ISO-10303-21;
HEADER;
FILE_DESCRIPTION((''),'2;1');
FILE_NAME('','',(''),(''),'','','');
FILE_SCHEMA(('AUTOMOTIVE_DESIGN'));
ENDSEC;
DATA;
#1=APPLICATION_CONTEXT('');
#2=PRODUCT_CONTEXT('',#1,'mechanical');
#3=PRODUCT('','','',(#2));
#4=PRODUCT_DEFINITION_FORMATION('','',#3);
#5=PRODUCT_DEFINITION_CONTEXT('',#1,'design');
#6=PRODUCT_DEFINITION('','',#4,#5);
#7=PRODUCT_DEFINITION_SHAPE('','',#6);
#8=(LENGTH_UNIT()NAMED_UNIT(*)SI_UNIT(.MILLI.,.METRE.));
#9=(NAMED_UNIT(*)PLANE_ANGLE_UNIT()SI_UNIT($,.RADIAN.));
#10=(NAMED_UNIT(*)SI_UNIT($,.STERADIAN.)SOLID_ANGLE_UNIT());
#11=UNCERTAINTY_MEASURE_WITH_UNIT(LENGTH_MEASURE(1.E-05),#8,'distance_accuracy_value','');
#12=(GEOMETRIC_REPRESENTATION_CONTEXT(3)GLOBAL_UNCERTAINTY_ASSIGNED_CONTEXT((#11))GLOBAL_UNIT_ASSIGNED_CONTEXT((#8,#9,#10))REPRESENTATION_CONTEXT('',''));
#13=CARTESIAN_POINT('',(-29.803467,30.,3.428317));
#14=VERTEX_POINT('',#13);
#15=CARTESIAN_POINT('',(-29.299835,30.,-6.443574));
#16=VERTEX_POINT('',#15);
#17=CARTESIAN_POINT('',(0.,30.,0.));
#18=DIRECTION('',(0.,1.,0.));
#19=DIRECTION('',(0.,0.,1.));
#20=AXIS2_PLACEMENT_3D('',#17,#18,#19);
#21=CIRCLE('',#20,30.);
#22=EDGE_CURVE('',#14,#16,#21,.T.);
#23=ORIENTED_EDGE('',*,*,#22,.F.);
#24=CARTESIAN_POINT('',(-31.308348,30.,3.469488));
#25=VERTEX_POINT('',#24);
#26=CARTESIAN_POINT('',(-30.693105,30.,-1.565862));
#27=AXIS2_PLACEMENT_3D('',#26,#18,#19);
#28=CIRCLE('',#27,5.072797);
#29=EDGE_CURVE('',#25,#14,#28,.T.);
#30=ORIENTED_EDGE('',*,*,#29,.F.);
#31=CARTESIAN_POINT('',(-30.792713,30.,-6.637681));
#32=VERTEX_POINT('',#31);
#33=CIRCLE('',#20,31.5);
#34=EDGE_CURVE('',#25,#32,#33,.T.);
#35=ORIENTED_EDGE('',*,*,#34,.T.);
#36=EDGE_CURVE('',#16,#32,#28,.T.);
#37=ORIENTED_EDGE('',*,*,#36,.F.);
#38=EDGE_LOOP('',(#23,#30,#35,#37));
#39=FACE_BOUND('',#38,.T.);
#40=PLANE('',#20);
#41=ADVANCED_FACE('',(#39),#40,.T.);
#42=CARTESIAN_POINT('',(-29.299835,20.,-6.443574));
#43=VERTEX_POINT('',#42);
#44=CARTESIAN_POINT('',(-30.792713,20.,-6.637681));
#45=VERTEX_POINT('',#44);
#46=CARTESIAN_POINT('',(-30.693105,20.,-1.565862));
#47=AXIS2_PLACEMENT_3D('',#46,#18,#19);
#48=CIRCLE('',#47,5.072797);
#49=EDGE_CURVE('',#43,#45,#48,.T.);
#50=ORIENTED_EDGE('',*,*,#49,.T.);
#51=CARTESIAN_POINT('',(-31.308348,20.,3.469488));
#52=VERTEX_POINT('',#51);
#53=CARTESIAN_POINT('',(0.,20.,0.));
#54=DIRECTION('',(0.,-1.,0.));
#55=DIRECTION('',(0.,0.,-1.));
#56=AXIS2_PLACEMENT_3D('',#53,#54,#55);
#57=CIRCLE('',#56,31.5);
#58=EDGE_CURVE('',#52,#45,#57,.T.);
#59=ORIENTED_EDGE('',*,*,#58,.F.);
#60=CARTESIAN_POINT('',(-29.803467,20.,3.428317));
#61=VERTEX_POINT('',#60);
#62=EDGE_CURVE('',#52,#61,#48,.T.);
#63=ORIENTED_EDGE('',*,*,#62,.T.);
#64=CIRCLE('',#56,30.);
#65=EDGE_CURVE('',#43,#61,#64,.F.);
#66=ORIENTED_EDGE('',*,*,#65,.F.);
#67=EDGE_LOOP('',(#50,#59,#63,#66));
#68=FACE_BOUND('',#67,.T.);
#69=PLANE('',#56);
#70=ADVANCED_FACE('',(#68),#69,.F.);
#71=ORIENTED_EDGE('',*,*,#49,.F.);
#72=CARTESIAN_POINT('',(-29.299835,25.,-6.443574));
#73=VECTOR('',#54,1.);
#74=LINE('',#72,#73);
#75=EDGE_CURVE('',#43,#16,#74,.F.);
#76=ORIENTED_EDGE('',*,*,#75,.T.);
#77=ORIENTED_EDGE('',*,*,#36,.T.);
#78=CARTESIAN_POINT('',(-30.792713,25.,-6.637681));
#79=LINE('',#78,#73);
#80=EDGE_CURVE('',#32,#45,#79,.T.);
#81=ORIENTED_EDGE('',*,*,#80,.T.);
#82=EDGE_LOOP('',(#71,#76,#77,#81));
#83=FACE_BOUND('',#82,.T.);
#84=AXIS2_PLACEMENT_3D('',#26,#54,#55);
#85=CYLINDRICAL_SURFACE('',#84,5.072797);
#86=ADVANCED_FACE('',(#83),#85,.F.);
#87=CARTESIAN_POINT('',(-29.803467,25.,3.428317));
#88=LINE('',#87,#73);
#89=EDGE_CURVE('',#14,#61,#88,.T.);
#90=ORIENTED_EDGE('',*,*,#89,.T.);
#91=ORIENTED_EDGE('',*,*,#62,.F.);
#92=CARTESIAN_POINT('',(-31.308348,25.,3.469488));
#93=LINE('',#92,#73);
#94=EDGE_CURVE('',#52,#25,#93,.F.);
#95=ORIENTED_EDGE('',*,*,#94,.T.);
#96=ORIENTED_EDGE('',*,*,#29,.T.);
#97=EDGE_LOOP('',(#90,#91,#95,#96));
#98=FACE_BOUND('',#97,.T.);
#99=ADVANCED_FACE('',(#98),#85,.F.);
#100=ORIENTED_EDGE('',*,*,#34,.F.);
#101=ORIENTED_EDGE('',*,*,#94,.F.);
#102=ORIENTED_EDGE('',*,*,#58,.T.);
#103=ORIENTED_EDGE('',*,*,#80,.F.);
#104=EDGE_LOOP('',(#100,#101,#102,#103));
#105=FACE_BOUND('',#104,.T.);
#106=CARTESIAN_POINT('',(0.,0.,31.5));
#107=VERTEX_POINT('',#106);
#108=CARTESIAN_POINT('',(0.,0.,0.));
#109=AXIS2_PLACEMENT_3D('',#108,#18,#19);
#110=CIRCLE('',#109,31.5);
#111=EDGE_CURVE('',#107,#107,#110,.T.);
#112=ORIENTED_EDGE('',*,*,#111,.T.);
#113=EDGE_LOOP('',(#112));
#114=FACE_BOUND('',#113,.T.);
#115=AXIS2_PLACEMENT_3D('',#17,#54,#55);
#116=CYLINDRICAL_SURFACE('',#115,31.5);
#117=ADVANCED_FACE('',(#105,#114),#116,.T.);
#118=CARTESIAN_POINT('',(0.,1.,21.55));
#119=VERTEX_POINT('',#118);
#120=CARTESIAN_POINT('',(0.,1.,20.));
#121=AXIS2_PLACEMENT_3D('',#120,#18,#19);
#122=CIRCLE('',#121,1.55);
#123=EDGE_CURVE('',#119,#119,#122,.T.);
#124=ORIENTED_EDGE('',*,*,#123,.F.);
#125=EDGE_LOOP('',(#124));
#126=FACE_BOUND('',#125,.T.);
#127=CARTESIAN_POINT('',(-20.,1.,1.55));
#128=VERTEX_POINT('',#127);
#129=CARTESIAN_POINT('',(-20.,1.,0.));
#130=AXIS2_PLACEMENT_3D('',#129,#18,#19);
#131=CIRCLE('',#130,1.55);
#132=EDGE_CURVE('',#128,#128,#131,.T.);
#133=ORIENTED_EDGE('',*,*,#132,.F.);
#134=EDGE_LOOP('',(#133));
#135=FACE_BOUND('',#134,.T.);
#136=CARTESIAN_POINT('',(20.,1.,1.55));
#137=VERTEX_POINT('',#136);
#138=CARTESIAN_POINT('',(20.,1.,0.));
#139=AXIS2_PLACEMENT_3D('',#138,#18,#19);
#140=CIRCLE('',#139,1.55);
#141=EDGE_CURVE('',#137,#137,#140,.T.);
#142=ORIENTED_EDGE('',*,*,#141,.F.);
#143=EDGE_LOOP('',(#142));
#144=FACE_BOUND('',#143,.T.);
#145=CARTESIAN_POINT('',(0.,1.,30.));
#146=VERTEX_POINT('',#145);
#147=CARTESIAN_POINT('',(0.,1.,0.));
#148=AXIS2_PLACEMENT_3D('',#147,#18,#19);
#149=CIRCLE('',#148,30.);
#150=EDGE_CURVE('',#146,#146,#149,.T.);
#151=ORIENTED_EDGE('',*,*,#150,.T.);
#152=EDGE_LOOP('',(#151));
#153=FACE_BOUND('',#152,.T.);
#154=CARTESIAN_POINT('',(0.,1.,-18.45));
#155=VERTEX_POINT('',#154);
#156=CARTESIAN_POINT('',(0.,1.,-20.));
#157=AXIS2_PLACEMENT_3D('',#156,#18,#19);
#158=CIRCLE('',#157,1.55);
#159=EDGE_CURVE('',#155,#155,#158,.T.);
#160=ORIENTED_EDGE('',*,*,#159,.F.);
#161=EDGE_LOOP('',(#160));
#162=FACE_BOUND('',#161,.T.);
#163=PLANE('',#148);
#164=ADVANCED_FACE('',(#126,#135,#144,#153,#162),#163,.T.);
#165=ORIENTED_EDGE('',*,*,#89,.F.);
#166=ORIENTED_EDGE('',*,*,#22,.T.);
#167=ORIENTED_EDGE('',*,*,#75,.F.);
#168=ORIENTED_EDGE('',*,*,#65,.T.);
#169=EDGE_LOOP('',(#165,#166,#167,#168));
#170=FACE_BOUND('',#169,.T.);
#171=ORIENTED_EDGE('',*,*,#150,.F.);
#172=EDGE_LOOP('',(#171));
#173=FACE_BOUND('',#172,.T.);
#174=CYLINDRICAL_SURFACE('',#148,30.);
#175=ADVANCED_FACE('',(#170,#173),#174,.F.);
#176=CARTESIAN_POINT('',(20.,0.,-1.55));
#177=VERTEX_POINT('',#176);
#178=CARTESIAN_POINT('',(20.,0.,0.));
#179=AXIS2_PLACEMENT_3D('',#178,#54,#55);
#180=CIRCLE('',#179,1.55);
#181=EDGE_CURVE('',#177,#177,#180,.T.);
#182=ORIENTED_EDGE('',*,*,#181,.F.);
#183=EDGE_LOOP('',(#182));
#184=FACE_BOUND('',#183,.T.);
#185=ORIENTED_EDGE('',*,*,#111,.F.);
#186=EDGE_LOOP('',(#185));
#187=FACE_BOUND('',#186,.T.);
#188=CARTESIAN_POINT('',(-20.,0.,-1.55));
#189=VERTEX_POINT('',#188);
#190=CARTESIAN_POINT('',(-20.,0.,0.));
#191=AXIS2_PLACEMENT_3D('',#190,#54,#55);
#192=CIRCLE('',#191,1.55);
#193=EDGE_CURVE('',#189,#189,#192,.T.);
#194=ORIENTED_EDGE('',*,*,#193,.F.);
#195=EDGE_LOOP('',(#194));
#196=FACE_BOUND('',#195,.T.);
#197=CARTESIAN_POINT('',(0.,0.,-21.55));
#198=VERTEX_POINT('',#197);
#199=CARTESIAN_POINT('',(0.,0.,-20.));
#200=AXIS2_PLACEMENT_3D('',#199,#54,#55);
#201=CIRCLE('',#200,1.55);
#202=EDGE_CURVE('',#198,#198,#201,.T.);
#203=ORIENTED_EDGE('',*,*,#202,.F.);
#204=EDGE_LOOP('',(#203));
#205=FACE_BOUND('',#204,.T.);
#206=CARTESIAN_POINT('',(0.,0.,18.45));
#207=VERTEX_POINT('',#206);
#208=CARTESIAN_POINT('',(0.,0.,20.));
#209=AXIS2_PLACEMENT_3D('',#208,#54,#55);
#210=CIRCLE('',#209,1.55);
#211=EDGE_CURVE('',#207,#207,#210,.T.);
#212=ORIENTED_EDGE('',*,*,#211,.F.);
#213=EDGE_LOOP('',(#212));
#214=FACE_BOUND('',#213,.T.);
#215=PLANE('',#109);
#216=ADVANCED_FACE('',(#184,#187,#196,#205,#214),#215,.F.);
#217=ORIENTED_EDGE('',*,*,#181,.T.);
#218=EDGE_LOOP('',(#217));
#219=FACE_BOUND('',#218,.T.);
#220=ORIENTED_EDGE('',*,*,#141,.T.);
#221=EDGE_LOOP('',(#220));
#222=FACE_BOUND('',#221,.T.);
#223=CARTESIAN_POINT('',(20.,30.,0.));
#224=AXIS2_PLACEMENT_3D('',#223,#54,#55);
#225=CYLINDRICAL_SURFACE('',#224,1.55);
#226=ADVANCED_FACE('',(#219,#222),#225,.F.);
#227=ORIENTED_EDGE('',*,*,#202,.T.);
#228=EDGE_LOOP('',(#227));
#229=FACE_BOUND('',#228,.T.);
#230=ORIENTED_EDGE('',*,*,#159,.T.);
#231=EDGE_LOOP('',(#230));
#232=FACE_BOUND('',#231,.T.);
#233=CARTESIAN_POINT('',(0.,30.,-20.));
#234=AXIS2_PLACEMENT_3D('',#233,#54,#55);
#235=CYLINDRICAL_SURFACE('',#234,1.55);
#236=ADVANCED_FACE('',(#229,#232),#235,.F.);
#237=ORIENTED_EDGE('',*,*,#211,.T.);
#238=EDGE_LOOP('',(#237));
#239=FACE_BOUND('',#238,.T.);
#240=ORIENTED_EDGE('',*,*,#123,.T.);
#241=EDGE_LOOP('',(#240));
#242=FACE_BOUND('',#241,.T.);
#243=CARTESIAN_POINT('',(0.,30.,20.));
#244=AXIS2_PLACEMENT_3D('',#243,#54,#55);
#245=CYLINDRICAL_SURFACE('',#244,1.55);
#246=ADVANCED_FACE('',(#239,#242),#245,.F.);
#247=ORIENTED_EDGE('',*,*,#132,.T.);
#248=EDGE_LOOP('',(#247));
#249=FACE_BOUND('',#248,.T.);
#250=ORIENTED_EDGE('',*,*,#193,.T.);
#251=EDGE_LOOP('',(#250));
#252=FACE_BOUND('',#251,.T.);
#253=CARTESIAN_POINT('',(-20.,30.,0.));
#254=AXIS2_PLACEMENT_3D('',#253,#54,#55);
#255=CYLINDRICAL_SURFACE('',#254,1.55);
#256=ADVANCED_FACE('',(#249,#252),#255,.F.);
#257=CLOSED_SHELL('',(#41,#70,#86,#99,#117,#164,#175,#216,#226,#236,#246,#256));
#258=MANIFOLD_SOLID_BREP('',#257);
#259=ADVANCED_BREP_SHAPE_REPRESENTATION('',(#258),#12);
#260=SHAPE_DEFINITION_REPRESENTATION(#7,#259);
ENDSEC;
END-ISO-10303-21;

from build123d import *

# Parameters (mm, degrees)
SKETCH1_R           = 31.5
BOSS_EXTRUDE2_DEPTH = 30
SKETCH2_R           = 30
CUT_EXTRUDE1_DEPTH  = 29
SKETCH3_R           = 1.55
CUT_EXTRUDE2_DEPTH  = 54.70754137
CUT_EXTRUDE3_START  = 20
CUT_EXTRUDE3_DEPTH  = 10


# Read off the part's stored shape, not the designer's step: Cut-Extrude3
with BuildPart() as part:
    # Sketch1 → Boss-Extrude2 (new body)
    with BuildSketch(Plane(origin=(0, 0, 0), x_dir=(1, 0, 0), z_dir=(0, 1, 0))):
        with Locations(Location((0, 0, 0), (0, 0, 270))):
            Circle(SKETCH1_R)
    extrude(amount=BOSS_EXTRUDE2_DEPTH)

    # Sketch2 → Cut-Extrude1 (cut)
    with BuildSketch(Plane(origin=(0, 30, 0), x_dir=(1, 0, 0), z_dir=(0, 1, 0))):
        with Locations(Location((0, 0, 0), (0, 0, 270))):
            Circle(SKETCH2_R)
    extrude(amount=-CUT_EXTRUDE1_DEPTH, mode=Mode.SUBTRACT)

    # Sketch3 → Cut-Extrude2 (cut, through all)
    with BuildSketch(Plane.XZ):
        with Locations(Location((0, 20, 0), (0, 0, 270))):
            Circle(SKETCH3_R)
        with Locations(Location((-20, 0, 0), (0, 0, 270))):
            Circle(SKETCH3_R)
        with Locations(Location((0, -20, 0), (0, 0, 270))):
            Circle(SKETCH3_R)
        with Locations(Location((20, 0, 0), (0, 0, 270))):
            Circle(SKETCH3_R)
    extrude(amount=-CUT_EXTRUDE2_DEPTH, mode=Mode.SUBTRACT)

    # Cut-Extrude3 outline → Cut-Extrude3 (cut)
    with BuildSketch(Plane(origin=(0, 0, 0), x_dir=(1, 0, 0), z_dir=(0, 1, 0)).offset(CUT_EXTRUDE3_START)):
        with BuildLine():
            ThreePointArc((-29.299835483, 6.443573593), (-30.039033671, 6.596315408), (-30.792713244, 6.637681152))
            ThreePointArc((-30.792713244, 6.637681152), (-31.45908722, 1.604939654), (-31.308347945, -3.469488288))
            ThreePointArc((-31.308347945, -3.469488288), (-30.554371668, -3.505038211), (-29.803467005, -3.428316566))
            ThreePointArc((-29.803467005, -3.428316566), (-29.961035448, 1.528513956), (-29.299835483, 6.443573593))
        make_face()
    extrude(amount=CUT_EXTRUDE3_DEPTH, mode=Mode.SUBTRACT)


solid = part.part
